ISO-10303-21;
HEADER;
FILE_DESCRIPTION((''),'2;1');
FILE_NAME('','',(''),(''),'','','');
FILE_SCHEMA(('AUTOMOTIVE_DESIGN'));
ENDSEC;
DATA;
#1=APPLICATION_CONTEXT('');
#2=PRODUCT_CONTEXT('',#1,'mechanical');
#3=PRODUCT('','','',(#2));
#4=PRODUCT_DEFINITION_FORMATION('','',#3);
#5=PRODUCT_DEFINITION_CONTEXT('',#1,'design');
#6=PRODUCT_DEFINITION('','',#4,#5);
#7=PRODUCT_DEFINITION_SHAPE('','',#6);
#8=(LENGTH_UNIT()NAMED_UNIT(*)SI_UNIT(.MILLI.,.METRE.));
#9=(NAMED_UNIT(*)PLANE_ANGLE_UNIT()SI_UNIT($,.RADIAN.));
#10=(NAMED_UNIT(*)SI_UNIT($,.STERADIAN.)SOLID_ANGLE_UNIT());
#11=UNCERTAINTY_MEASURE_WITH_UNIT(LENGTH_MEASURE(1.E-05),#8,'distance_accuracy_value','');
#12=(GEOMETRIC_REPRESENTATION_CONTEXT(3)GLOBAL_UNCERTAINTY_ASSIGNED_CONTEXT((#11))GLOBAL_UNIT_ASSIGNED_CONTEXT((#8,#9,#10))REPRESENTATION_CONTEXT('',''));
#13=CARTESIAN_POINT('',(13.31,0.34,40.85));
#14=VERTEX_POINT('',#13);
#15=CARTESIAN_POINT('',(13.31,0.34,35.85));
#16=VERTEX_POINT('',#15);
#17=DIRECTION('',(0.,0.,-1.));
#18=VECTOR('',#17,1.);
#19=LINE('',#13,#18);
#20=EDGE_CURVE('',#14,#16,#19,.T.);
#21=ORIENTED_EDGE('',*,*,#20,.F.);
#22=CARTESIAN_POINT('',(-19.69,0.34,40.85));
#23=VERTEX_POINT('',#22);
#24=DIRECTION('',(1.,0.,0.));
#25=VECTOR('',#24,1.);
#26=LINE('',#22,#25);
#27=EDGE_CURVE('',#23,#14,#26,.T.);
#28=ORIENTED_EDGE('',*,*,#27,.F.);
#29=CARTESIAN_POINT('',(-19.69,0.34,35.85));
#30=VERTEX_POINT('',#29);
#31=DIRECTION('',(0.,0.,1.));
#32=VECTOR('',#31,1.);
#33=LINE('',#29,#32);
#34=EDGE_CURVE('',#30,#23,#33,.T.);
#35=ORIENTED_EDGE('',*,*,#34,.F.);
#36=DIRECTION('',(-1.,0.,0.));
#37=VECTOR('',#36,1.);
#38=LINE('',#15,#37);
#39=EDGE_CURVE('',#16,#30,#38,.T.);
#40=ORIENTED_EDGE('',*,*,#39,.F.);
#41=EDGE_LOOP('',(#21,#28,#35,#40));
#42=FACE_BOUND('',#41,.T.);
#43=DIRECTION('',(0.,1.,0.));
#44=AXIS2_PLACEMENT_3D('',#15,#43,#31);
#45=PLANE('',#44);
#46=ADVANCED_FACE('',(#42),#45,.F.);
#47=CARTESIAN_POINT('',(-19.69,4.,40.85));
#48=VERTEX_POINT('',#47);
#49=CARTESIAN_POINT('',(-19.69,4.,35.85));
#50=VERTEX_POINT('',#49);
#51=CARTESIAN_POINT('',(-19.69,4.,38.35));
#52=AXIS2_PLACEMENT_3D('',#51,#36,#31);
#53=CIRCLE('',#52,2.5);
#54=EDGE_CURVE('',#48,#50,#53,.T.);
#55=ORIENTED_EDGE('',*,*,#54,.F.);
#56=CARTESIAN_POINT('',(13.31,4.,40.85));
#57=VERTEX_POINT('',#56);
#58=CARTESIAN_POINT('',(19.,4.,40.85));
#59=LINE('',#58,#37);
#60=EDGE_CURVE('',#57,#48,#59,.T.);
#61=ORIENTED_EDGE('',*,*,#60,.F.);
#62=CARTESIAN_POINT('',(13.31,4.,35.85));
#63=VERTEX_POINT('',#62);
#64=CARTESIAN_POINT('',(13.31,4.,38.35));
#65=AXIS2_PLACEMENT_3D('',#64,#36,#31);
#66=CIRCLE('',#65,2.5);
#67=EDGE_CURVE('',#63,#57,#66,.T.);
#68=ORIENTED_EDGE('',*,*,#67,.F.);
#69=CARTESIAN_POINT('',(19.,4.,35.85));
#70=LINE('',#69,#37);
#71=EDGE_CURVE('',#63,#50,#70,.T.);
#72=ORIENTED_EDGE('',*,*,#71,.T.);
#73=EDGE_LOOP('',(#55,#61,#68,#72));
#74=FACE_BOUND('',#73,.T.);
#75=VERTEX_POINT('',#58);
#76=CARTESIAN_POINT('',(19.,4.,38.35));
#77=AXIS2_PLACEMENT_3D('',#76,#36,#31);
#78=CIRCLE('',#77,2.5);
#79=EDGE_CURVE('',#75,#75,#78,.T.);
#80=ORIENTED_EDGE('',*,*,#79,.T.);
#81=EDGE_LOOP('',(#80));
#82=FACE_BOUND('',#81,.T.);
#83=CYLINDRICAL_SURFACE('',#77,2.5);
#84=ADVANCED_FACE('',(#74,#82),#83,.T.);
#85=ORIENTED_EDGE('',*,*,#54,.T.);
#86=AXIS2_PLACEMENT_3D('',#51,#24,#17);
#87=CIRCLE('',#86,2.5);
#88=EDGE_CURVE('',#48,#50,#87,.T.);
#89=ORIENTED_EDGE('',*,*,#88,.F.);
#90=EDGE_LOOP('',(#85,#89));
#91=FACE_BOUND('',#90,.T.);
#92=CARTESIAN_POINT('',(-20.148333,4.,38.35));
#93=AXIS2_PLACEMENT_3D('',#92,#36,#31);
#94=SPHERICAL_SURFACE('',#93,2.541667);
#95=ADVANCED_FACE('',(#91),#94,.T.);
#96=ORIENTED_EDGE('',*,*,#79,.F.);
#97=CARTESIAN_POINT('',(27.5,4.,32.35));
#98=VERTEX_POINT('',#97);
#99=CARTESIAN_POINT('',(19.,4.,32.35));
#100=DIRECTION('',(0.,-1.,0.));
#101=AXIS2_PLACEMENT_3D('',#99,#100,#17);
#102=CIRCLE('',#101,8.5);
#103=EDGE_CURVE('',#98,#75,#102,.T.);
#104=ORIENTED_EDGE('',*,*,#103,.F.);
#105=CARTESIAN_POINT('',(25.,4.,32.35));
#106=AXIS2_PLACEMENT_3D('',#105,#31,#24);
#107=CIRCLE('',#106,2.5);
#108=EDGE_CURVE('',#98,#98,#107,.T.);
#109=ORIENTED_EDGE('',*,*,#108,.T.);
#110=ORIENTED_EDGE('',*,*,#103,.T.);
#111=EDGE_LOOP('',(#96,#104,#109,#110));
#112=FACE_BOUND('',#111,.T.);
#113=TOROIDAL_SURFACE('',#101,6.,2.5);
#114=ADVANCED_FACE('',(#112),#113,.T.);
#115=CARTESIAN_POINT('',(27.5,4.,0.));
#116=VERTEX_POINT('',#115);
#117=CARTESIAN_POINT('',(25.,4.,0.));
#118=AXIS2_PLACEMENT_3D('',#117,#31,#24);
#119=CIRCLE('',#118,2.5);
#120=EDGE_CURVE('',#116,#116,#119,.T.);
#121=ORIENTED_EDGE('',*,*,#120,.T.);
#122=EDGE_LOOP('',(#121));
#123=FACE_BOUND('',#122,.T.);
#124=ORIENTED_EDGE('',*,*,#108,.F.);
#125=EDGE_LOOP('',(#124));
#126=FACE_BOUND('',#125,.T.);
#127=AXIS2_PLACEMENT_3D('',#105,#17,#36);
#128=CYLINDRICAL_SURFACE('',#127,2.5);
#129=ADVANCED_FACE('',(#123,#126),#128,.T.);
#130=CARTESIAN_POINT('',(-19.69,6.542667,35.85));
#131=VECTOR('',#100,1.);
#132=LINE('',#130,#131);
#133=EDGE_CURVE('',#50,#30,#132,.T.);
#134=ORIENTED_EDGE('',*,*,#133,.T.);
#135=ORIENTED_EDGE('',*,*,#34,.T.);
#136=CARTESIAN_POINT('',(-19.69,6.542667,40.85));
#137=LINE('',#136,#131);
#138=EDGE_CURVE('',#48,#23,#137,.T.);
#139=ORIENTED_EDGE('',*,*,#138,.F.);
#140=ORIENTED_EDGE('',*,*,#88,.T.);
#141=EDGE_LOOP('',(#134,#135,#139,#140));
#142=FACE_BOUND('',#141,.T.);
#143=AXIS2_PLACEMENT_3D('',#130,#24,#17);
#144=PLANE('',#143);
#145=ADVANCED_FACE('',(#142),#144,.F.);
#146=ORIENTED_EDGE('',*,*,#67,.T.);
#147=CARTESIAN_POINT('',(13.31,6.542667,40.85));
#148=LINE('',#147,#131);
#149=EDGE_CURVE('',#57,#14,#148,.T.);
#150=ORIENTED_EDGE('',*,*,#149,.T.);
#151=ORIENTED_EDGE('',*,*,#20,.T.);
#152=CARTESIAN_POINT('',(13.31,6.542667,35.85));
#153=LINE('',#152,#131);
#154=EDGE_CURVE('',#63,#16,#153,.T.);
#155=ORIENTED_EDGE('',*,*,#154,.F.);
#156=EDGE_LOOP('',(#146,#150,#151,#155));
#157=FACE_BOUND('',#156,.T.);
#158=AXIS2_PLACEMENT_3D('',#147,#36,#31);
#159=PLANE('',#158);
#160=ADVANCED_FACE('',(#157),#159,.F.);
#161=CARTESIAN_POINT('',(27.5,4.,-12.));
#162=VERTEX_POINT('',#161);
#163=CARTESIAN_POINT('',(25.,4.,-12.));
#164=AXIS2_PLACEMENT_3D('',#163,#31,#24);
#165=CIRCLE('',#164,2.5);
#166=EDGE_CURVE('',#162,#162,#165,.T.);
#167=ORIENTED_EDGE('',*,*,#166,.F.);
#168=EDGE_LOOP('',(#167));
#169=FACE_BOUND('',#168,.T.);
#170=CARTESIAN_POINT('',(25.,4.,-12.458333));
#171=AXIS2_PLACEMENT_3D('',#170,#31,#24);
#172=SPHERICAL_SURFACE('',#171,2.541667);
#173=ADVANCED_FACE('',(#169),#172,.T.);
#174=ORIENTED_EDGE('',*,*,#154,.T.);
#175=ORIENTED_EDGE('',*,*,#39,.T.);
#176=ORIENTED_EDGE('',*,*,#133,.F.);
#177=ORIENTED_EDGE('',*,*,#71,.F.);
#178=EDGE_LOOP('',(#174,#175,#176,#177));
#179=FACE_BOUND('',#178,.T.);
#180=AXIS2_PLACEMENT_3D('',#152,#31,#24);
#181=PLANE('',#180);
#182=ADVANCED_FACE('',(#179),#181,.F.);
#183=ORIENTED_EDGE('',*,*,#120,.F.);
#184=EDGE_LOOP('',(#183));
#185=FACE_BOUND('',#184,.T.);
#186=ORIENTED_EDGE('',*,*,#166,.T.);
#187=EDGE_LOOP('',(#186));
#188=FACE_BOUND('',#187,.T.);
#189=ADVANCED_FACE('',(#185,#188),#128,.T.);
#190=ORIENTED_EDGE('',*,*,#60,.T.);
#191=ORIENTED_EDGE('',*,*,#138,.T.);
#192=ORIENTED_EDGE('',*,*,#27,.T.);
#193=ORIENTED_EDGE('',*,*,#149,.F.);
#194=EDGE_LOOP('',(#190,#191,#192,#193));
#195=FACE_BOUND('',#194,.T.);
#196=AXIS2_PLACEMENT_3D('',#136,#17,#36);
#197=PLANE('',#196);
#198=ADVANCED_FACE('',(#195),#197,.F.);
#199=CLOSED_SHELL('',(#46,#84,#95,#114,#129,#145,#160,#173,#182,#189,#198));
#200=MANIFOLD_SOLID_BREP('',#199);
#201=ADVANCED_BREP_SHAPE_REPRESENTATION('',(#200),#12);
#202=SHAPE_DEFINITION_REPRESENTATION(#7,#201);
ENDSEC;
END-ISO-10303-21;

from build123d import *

# Parameters (mm, degrees)
SWEEP1_START        = -19.69
SWEEP1_OUTLINE_R    = 2.5
SWEEP1_DEPTH        = 38.69
SWEEP1_START_2      = -12
SWEEP1_2_OUTLINE_R  = 2.5
SWEEP1_2_DEPTH      = 44.35
SWEEP1_3_OUTLINE_R  = 2.5
SWEEP1_3_ANGLE      = 90
DOME1_FACE_RADIUS   = 2.5
DOME1_HEIGHT        = 3
DOME2_FACE_RADIUS   = 2.5
DOME2_HEIGHT        = 3
EXTRUDE1_REACH      = 51.69
EXTRUDE1_END_RADIUS = 2.5
SKETCH3_W           = 33
SKETCH3_H           = 5


with BuildPart() as part:
    # Sweep1: read off the stored shape, not the designer's step
    # Sweep1 outline → Sweep1 (new body)
    with BuildSketch(Plane.YZ.offset(SWEEP1_START)):
        with Locations((4, 38.35)):
            Circle(SWEEP1_OUTLINE_R)
    extrude(amount=SWEEP1_DEPTH)



with BuildPart() as body_2:
    # Sweep1 2 outline → Sweep1 2 (new body)
    with BuildSketch(Plane.XY.offset(SWEEP1_START_2)):
        with Locations((25, 4)):
            Circle(SWEEP1_2_OUTLINE_R)
    extrude(amount=SWEEP1_2_DEPTH)


with BuildPart() as part_1:
    add(part.part)

    add(body_2.part)  # Sweep1 3 merges body 2
    # Sweep1 3 outline → Sweep1 3 (revolve)
    with BuildSketch(Plane(origin=(19, 0, 32.35), x_dir=(0, 0, 1), z_dir=(-1, 0, 0))):
        with Locations((6, 4)):
            Circle(SWEEP1_3_OUTLINE_R)
    revolve(axis=Axis((19, 0, 32.35), (0, 1, 0)), revolution_arc=SWEEP1_3_ANGLE)

    # Dome1: a dome of height H over a round flat face of radius A is a cap of a sphere of radius (A * A + H * H) / (2 * H)
    dome1_r = (DOME1_FACE_RADIUS * DOME1_FACE_RADIUS + DOME1_HEIGHT * DOME1_HEIGHT) / (2 * DOME1_HEIGHT)
    dome1_base = Plane((-19.69, 4, 38.35), z_dir=(-1, 0, 0))
    with Locations(dome1_base.offset(DOME1_HEIGHT - dome1_r)):
        dome1_ball = Sphere(dome1_r, mode=Mode.PRIVATE)
    add(split(dome1_ball, bisect_by=dome1_base, keep=Keep.TOP, mode=Mode.PRIVATE))

    # Dome2: a dome of height H over a round flat face of radius A is a cap of a sphere of radius (A * A + H * H) / (2 * H)
    dome2_r = (DOME2_FACE_RADIUS * DOME2_FACE_RADIUS + DOME2_HEIGHT * DOME2_HEIGHT) / (2 * DOME2_HEIGHT)
    dome2_base = Plane((25, 4, -12), z_dir=(0, 0, -1))
    with Locations(dome2_base.offset(DOME2_HEIGHT - dome2_r)):
        dome2_ball = Sphere(dome2_r, mode=Mode.PRIVATE)
    add(split(dome2_ball, bisect_by=dome2_base, keep=Keep.TOP, mode=Mode.PRIVATE))

    # Extrude1: up to this cylinder (the profile starts outside it)
    extrude1_end = Plane(origin=(-3.19, 4, 38.35), z_dir=(-1, 0, 0)) * Cylinder(EXTRUDE1_END_RADIUS, 109.38, mode=Mode.PRIVATE)
    # Sketch3 → Extrude1 (add, up to the surface)
    with BuildSketch(Plane(origin=(0, 0.34, 0), x_dir=(-1, 0, 0), z_dir=(0, 1, 0)), mode=Mode.PRIVATE) as extrude1_sk1:
        with Locations((3.19, 38.35)):
            Rectangle(SKETCH3_W, SKETCH3_H)
    extrude1_tool1 = extrude(extrude1_sk1.sketch, amount=EXTRUDE1_REACH, mode=Mode.PRIVATE) - extrude1_end
    add(extrude1_tool1.solids().sort_by_distance((-3.19, 0.34, 38.35))[0])


solid = part_1.part
